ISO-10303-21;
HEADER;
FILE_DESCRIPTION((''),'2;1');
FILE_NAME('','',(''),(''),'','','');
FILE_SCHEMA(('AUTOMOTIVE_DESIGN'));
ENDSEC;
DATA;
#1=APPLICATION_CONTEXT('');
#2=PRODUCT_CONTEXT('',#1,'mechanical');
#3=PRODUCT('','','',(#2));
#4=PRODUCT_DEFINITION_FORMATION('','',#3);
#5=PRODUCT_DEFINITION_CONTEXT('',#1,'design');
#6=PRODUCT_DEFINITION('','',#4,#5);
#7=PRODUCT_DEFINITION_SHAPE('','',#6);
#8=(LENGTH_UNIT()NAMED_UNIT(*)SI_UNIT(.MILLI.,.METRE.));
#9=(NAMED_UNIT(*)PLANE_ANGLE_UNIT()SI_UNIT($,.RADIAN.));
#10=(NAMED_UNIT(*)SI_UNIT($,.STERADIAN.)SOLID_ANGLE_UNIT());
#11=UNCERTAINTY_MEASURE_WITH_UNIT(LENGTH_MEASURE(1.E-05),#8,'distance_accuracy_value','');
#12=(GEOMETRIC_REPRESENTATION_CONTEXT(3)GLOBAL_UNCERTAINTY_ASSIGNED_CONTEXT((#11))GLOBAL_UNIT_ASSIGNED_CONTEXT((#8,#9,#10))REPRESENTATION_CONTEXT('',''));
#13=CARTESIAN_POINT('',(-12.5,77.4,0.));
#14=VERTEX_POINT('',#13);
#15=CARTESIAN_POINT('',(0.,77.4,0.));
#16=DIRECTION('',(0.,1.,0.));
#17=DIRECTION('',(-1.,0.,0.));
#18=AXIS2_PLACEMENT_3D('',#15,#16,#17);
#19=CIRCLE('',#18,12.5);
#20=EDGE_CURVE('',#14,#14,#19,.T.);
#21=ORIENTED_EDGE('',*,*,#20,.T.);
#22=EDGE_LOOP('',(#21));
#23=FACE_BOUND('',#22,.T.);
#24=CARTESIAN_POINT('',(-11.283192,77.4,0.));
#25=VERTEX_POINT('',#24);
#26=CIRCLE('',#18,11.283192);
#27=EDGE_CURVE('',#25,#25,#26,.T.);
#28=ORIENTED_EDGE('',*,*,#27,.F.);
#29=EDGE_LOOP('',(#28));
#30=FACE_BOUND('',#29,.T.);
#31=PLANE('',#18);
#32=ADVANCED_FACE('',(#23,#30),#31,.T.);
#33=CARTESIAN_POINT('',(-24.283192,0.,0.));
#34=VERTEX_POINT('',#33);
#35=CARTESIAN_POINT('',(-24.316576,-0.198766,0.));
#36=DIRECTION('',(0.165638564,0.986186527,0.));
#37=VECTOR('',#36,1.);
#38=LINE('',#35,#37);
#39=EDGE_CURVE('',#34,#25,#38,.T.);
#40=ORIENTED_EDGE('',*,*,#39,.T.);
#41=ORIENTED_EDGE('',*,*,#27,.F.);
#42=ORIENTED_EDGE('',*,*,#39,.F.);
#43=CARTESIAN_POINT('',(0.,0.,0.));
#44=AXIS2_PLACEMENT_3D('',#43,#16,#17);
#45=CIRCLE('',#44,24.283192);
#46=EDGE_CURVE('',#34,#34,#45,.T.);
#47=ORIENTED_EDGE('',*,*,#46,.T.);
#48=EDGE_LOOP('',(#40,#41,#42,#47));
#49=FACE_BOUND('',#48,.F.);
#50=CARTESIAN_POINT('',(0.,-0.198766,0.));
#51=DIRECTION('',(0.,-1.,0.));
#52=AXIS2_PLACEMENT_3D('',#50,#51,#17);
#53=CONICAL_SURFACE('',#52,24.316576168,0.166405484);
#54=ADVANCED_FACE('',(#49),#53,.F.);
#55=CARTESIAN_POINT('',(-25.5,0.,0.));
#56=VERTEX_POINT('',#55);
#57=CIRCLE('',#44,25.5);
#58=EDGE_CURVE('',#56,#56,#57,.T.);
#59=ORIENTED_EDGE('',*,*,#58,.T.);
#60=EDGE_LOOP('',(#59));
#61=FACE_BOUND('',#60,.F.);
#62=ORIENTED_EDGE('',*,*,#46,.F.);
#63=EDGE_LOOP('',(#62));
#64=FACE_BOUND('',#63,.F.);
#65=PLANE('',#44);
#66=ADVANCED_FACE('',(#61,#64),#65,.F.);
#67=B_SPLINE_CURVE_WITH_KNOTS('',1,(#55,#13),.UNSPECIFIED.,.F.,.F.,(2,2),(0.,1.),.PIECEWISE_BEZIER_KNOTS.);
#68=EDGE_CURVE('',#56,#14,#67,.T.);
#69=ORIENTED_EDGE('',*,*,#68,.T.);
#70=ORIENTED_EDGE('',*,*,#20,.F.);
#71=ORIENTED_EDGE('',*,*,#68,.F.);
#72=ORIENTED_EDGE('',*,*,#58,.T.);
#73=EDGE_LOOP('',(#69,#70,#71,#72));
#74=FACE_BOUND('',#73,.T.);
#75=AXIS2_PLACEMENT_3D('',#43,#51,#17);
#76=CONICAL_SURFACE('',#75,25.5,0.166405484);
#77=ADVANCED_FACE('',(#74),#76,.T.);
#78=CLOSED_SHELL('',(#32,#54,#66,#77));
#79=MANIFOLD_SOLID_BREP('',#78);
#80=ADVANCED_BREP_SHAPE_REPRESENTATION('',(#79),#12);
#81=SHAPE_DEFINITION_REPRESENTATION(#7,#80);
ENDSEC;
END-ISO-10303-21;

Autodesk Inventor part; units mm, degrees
ref_plane "YZ Plane" through (0, 0, 0) normal (1, 0, 0) x (0, 1, 0)
ref_plane "XY Plane" through (0, 0, 0) normal (0, 0, 1) x (1, 0, 0)
sketch "Szkic6" plane through (0, 0, 0) normal (0, 1, 0) x (-1, 0, 0)
  circle A0 centre (0, 0) radius 25.5
  dimension "d33" = 51
ref_plane "Płaszczyzna konstrukcyjna1" through (0, 77.4, 0) normal (0, 1, 0) x (-1, 0, 0)
sketch "Szkic7" plane through (0, 77.4, 0) normal (0, 1, 0) x (-1, 0, 0)
  circle A0 centre (0, 0) radius 12.5
  dimension "d35" = 25
loft "Wyciągnięcie złożone1" add profiles "Szkic6", "Szkic7"
shell "Skorupa1" thickness 1.2 removed faces 2 at (-2.488, 77.4, -2.432) at (4.5479, 0, -4.6843)
equation "\"d33\" = OD1"
equation "\"d35\" = OD2"
equation "\"d52\" = THK"
equation "\"SzerokośćGięciaPodcięcia\" = Grubość"
equation "\"RozmiarPodcięciaNarożnika\" = 4 * Grubość"
equation "\"PromieńPrzejścia\" = PromieńGięcia"
equation "\"Rozmiar_promienia_Jacobiego\" = PromieńGięcia"
equation "\"Wielk_odstępu\" = Grubość"
equation "\"d2\" = PromieńGięcia"
equation "\"d23\" = PromieńGięcia"
equation "\"OD1\" = 51"
equation "\"OD2\" = 25"
equation "\"L\" = 77.4"
equation "\"THK\" = 1.2"
equation "\"d34\" = L"
equation "\"Grubość\" = 1.5"
equation "\"PromieńGięcia\" = 3"
properties part number "Redukcja symetryczna Ø51x25x1,2 L=77,4" material "304"
